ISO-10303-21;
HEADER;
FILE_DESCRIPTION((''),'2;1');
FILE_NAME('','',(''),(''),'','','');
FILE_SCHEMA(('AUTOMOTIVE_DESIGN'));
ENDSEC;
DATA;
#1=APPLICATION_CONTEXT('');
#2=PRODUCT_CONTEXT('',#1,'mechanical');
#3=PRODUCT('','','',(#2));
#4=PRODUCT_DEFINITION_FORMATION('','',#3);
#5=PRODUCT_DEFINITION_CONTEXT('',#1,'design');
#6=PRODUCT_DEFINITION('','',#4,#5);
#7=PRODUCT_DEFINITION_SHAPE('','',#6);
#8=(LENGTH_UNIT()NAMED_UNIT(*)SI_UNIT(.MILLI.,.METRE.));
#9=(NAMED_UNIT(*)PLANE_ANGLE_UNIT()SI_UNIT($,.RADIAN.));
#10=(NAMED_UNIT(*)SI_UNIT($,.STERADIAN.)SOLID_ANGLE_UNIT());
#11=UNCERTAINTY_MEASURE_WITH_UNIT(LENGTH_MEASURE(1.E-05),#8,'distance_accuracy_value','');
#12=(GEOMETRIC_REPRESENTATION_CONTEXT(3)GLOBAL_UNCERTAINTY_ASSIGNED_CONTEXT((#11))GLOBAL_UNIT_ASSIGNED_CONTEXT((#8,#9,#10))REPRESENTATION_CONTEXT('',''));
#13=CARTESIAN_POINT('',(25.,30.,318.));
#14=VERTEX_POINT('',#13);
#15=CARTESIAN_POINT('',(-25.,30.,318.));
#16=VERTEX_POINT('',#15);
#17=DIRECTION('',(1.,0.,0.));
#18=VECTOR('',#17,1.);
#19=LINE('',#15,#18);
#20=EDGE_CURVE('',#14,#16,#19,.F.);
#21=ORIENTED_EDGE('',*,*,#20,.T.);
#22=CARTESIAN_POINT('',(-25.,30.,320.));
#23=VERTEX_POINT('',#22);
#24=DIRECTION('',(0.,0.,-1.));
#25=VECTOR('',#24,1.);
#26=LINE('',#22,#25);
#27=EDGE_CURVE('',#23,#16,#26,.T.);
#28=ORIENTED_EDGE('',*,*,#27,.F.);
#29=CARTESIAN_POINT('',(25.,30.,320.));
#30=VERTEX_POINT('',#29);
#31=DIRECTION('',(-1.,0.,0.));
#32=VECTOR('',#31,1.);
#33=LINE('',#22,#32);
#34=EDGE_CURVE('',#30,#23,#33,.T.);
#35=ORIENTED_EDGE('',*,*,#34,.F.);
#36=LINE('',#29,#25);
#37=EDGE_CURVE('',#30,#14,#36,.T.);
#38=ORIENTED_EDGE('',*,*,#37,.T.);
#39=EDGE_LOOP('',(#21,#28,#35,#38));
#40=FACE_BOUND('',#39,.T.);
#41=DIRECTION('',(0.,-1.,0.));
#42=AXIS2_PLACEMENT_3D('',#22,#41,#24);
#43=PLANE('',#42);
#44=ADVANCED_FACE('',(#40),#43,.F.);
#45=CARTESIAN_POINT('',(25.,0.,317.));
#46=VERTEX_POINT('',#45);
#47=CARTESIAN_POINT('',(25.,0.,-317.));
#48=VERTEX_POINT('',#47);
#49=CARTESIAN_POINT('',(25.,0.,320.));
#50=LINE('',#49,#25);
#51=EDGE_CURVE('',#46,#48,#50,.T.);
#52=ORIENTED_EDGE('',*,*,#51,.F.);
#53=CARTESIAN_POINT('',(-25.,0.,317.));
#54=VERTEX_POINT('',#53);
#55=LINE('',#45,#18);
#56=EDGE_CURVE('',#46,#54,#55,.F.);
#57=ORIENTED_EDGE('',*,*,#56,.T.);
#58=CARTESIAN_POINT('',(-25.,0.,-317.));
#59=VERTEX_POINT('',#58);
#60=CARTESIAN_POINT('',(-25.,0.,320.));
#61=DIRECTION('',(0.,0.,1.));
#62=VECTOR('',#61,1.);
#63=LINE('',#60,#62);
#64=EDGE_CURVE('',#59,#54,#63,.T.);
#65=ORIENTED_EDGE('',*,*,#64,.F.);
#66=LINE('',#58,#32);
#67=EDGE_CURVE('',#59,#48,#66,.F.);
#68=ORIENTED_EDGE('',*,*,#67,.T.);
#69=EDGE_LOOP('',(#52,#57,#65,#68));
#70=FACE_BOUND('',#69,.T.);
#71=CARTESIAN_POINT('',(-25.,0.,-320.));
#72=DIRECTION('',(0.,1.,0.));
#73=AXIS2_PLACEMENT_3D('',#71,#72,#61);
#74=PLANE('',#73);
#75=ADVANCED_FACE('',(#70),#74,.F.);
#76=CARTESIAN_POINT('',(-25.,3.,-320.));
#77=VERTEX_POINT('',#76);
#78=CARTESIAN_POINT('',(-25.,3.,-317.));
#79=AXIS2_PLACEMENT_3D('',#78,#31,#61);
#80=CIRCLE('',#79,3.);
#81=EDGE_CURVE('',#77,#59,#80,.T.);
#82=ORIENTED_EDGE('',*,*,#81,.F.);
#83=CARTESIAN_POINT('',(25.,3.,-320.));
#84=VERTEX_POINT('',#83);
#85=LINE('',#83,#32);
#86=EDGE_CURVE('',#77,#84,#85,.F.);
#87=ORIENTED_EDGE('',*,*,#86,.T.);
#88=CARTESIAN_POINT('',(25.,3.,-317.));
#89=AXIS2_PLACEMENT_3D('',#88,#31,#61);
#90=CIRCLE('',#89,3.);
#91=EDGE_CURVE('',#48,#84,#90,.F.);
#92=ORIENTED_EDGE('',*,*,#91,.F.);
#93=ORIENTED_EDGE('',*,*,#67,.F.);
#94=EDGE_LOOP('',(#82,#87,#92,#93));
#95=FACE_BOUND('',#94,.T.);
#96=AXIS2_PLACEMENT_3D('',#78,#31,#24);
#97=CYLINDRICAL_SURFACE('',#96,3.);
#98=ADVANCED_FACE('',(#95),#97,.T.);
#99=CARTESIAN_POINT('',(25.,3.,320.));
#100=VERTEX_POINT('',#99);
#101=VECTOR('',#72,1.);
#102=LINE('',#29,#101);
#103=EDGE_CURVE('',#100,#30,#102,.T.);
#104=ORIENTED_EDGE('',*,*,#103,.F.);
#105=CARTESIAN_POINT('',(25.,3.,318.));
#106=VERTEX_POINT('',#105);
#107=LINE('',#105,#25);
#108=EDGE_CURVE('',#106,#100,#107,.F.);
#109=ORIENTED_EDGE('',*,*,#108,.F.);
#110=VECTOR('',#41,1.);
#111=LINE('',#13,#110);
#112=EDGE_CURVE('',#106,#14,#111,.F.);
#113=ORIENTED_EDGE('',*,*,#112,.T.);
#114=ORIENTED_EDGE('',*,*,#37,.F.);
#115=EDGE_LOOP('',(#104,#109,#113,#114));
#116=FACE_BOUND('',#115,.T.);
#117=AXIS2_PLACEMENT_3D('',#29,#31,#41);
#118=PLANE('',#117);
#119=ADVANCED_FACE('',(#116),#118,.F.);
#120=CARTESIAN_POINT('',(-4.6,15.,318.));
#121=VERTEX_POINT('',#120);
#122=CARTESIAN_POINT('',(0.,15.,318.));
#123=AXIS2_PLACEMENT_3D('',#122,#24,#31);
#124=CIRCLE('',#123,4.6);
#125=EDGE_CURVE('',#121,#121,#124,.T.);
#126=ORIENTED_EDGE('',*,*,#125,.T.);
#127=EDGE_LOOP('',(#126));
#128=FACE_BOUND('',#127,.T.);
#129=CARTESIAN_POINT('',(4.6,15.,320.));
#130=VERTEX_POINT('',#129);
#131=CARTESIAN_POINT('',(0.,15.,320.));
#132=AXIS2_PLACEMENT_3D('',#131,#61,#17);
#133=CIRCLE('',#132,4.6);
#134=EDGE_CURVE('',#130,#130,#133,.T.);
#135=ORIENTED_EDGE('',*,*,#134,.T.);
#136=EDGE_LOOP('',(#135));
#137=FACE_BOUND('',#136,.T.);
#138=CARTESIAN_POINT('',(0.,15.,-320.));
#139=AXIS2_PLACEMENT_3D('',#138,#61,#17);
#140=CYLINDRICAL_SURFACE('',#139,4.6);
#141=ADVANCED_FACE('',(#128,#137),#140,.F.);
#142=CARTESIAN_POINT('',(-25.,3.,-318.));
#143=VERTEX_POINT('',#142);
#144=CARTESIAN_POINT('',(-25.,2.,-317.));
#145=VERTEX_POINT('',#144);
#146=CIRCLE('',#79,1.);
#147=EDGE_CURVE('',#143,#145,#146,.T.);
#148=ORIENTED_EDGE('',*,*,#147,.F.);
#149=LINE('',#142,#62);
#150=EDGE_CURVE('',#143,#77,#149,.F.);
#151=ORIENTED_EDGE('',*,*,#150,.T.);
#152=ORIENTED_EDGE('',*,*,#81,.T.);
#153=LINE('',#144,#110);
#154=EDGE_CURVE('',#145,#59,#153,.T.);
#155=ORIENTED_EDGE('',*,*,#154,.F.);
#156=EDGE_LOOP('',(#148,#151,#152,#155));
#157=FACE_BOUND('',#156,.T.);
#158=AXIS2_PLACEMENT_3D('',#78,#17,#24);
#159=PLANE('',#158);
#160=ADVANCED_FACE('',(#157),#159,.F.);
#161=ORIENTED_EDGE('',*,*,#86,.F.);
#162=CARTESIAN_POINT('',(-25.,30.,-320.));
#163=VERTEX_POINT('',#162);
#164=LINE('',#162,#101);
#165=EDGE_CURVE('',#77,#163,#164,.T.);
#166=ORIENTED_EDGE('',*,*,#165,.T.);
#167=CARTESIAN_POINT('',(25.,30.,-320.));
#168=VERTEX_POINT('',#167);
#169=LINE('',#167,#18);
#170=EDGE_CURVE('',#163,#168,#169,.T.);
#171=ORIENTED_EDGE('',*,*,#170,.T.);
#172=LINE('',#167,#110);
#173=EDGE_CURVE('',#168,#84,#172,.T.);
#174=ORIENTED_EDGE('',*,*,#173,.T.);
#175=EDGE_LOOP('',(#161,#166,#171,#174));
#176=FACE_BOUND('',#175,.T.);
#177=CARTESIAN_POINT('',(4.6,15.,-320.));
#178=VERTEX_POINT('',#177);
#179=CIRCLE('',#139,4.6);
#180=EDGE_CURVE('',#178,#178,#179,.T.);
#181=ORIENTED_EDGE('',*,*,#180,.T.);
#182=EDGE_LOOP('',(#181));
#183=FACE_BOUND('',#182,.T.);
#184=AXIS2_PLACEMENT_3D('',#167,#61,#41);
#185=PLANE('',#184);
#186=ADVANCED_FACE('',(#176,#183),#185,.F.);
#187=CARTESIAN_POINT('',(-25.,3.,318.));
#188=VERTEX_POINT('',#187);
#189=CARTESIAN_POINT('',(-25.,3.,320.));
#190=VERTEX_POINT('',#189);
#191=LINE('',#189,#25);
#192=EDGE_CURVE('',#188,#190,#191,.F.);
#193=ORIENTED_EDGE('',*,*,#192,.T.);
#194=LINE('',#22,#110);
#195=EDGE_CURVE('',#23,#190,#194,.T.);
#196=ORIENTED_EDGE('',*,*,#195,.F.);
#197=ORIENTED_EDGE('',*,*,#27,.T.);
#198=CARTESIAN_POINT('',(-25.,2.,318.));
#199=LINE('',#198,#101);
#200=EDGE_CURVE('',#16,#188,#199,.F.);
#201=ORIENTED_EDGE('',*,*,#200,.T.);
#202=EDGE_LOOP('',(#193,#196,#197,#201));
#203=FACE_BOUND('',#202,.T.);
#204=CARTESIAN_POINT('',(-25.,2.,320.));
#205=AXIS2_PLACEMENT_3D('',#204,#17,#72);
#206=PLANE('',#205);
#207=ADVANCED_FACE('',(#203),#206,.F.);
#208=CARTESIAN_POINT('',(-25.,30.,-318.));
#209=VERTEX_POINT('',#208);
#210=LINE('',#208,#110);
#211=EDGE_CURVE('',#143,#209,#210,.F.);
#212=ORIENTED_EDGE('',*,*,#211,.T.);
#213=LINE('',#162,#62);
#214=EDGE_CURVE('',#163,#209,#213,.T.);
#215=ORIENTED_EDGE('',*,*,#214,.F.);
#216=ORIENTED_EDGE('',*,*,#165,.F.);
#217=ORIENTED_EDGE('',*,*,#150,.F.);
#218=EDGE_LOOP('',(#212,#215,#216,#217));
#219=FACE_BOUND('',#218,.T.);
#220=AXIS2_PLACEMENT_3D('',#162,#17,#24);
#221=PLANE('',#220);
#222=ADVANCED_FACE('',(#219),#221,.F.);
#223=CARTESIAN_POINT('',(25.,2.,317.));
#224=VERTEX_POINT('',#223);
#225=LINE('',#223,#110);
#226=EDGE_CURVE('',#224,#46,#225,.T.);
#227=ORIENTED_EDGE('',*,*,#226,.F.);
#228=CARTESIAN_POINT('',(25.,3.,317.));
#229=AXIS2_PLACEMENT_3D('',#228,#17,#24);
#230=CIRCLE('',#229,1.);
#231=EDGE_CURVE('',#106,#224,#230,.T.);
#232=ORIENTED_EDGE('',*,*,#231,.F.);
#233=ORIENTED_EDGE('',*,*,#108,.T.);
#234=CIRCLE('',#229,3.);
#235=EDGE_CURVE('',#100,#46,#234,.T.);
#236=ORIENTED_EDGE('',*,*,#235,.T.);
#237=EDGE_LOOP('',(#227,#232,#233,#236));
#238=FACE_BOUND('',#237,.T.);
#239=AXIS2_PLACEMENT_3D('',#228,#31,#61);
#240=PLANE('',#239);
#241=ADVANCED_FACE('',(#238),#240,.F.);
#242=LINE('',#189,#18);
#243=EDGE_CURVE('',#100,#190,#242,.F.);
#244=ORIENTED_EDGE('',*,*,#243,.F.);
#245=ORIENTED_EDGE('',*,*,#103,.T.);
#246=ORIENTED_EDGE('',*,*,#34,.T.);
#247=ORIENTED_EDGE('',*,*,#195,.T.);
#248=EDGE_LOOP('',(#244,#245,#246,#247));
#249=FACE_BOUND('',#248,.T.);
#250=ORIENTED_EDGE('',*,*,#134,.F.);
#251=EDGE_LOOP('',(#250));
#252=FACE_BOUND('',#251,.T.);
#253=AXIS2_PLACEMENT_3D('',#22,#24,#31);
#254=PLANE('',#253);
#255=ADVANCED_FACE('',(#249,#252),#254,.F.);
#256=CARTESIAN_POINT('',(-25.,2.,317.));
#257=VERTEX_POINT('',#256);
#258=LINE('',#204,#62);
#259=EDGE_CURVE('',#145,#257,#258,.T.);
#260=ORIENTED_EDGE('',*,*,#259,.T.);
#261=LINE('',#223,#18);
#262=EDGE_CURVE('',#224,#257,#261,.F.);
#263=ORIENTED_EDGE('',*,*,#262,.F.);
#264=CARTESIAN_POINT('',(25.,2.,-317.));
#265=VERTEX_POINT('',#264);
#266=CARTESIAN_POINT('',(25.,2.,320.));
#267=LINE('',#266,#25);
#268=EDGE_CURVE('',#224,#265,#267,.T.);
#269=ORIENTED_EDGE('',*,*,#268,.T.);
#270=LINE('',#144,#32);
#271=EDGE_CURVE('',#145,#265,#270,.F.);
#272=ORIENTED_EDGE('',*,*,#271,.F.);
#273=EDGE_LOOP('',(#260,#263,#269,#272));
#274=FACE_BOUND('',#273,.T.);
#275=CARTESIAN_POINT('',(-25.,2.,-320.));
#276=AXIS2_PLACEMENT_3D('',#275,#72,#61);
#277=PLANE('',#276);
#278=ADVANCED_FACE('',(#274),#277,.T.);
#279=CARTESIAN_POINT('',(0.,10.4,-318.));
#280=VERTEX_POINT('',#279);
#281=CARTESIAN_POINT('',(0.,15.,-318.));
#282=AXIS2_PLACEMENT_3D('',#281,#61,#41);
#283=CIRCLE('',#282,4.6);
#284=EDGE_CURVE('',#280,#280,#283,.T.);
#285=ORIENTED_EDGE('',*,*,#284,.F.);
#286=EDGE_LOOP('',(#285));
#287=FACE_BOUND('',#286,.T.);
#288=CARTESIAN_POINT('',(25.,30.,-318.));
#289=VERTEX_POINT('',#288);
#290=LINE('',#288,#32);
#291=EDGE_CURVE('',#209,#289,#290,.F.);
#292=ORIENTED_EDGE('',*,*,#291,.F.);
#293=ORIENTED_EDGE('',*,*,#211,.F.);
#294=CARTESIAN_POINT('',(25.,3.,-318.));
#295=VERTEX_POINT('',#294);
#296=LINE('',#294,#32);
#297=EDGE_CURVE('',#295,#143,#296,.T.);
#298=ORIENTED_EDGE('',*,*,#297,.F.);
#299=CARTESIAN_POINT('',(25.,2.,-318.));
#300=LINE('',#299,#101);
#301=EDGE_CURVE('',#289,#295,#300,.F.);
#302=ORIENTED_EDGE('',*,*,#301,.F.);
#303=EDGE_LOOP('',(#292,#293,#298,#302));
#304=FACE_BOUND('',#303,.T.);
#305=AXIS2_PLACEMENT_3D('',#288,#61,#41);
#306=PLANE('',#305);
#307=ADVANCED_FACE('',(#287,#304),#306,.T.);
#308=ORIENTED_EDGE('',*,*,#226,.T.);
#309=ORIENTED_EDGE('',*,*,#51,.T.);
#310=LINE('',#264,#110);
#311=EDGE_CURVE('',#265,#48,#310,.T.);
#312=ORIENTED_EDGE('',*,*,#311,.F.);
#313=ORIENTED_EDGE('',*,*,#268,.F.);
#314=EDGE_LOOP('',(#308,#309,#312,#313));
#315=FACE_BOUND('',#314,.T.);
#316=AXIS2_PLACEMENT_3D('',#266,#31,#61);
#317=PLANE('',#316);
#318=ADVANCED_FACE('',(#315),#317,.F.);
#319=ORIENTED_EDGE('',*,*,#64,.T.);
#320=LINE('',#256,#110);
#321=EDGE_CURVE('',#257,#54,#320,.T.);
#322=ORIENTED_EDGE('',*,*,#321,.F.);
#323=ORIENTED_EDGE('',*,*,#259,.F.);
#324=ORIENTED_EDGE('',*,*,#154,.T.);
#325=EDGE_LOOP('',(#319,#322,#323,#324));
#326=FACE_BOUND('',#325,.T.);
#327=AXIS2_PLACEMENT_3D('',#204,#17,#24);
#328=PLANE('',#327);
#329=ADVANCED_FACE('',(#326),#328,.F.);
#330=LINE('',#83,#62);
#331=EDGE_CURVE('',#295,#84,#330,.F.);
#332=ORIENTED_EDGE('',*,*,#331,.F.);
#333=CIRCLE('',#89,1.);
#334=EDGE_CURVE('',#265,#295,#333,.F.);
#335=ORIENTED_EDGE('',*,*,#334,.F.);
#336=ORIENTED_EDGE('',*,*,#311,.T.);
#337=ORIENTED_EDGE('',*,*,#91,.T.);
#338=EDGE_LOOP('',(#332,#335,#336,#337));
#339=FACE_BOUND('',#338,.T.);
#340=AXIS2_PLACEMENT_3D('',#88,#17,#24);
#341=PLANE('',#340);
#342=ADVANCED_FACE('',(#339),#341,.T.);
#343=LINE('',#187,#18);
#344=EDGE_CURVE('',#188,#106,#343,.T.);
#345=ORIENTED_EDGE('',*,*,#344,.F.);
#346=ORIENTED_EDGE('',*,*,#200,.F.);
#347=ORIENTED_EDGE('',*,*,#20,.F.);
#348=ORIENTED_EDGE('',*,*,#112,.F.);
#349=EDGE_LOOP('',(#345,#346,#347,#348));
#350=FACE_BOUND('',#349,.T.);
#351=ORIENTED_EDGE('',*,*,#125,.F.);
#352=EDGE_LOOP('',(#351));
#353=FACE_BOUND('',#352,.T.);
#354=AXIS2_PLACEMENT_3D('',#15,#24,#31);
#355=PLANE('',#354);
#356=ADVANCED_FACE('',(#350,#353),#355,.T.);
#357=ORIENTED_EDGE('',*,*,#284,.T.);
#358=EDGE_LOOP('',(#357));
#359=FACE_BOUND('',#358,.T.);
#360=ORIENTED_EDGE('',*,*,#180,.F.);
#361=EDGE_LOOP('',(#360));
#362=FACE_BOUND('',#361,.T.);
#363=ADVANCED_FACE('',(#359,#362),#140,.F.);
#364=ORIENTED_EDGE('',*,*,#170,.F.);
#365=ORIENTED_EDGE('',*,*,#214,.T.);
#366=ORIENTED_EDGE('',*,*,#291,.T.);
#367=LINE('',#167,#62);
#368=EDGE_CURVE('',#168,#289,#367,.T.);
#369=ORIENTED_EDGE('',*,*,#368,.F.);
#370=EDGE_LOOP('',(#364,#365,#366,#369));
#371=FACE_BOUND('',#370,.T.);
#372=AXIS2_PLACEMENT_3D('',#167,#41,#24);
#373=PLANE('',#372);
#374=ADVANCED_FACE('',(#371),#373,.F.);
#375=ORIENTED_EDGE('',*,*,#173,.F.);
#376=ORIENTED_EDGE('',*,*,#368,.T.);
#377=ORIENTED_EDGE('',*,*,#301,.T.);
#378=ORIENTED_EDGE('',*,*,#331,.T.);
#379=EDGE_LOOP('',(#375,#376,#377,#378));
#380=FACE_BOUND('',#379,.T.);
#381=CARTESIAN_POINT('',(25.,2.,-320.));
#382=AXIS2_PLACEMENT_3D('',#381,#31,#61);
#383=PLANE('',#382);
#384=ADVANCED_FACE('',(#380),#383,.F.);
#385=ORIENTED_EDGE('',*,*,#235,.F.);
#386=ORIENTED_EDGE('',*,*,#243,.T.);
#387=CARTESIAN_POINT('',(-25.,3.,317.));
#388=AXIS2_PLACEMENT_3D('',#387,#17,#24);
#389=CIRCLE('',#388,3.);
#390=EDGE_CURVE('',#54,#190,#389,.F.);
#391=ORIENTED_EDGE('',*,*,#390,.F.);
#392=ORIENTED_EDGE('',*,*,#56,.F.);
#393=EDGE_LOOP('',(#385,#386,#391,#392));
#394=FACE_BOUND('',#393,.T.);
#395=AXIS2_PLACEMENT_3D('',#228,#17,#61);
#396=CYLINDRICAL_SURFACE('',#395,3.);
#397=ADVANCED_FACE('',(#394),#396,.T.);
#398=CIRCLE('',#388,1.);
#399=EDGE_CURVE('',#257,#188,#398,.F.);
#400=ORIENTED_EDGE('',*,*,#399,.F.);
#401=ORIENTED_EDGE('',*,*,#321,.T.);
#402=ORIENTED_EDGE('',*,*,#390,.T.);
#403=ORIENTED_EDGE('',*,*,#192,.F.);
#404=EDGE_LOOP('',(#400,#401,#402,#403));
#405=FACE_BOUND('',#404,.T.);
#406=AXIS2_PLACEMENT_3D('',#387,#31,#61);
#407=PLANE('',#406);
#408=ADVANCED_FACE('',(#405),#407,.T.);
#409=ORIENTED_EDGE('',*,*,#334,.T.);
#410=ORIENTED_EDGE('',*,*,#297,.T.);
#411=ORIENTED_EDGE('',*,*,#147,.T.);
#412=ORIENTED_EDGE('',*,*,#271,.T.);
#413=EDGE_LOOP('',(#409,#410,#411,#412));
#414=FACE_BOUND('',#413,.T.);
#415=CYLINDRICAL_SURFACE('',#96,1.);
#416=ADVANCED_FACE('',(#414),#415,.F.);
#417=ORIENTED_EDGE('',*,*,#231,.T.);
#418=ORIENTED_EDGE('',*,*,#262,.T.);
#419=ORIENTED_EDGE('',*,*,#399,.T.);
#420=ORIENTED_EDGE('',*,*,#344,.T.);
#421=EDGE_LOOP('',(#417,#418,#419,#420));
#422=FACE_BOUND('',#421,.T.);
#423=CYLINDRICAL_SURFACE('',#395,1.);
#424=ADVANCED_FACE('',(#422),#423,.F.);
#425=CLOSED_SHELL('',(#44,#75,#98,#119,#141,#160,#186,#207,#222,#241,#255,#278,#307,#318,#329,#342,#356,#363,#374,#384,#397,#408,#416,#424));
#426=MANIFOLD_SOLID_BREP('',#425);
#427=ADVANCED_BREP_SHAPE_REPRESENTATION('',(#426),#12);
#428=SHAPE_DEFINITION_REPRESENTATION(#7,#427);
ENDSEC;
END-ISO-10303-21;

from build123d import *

# Parameters (mm, degrees)
BASEFLANGE_W                   = 50
BASEFLANGE_H                   = 640
BASE_FLANGE1_DEPTH             = 2
EDGE_FLANGE1_STRIP_W           = 10
EDGE_FLANGE1_STRIP_H           = 2
EDGE_FLANGE1_STRIP_CUT_DEPTH   = 50
EDGE_FLANGE1_STRIP_2_W         = 10
EDGE_FLANGE1_STRIP_2_H         = 2
EDGE_FLANGE1_STRIP_CUT_2_DEPTH = 50
EDGE_FLANGE1_DEPTH             = 50
EDGE_FLANGE1_BEND_DEPTH        = 50
SKETCH8_R                      = 4.6
EXTRUDE1_DEPTH                 = 642.190299365


# Sheet-metal steps are written as plain solids
with BuildPart() as part:
    # BaseFlange → Base-Flange1 (new body)
    with BuildSketch(Plane(origin=(0, 0, 0), x_dir=(1, 0, 0), z_dir=(0, 1, 0))):
        Rectangle(BASEFLANGE_W, BASEFLANGE_H)
    extrude(amount=BASE_FLANGE1_DEPTH)

    # Edge-Flange1 strip (across the edge) → Edge-Flange1 strip cut (cut)
    with BuildSketch(Plane(origin=(-25, 2, 320), x_dir=(0, 0, -1), z_dir=(1, 0, 0))):
        with Locations((-2, -1)):
            Rectangle(EDGE_FLANGE1_STRIP_W, EDGE_FLANGE1_STRIP_H)
    extrude(amount=EDGE_FLANGE1_STRIP_CUT_DEPTH, mode=Mode.SUBTRACT)

    # Edge-Flange1 strip 2 (across the edge) → Edge-Flange1 strip cut 2 (cut)
    with BuildSketch(Plane(origin=(25, 2, -320), x_dir=(0, 0, 1), z_dir=(-1, 0, 0))):
        with Locations((-2, -1)):
            Rectangle(EDGE_FLANGE1_STRIP_2_W, EDGE_FLANGE1_STRIP_2_H)
    extrude(amount=EDGE_FLANGE1_STRIP_CUT_2_DEPTH, mode=Mode.SUBTRACT)

    # Edge-Flange1 section (across the edge) → Edge-Flange1 (add)
    with BuildSketch(Plane(origin=(-25, 2, 320), x_dir=(0, 0, -1), z_dir=(1, 0, 0))):
        with BuildLine():
            Line((0, 1), (0, 28))
            Line((0, 28), (2, 28))
            Line((2, 28), (2, 1))
            ThreePointArc((2, 1), (2.292893219, 0.292893219), (3, 0))
            Line((3, 0), (3, -2))
            ThreePointArc((3, -2), (0.878679656, -1.121320344), (0, 1))
        make_face()
    extrude(amount=EDGE_FLANGE1_DEPTH)

    # Edge-Flange1 section 2 (across the edge) → Edge-Flange1 bend (add)
    with BuildSketch(Plane(origin=(25, 2, -320), x_dir=(0, 0, 1), z_dir=(-1, 0, 0))):
        with BuildLine():
            Line((0, 1), (0, 28))
            Line((0, 28), (2, 28))
            Line((2, 28), (2, 1))
            ThreePointArc((2, 1), (2.292893219, 0.292893219), (3, 0))
            Line((3, 0), (3, -2))
            ThreePointArc((3, -2), (0.878679656, -1.121320344), (0, 1))
        make_face()
    extrude(amount=EDGE_FLANGE1_BEND_DEPTH)

    # Sketch8 → Extrude1 (cut, through all)
    with BuildSketch(Plane.XY.offset(320)):
        with Locations((0, 15)):
            Circle(SKETCH8_R)
    extrude(amount=-EXTRUDE1_DEPTH, mode=Mode.SUBTRACT)


solid = part.part
